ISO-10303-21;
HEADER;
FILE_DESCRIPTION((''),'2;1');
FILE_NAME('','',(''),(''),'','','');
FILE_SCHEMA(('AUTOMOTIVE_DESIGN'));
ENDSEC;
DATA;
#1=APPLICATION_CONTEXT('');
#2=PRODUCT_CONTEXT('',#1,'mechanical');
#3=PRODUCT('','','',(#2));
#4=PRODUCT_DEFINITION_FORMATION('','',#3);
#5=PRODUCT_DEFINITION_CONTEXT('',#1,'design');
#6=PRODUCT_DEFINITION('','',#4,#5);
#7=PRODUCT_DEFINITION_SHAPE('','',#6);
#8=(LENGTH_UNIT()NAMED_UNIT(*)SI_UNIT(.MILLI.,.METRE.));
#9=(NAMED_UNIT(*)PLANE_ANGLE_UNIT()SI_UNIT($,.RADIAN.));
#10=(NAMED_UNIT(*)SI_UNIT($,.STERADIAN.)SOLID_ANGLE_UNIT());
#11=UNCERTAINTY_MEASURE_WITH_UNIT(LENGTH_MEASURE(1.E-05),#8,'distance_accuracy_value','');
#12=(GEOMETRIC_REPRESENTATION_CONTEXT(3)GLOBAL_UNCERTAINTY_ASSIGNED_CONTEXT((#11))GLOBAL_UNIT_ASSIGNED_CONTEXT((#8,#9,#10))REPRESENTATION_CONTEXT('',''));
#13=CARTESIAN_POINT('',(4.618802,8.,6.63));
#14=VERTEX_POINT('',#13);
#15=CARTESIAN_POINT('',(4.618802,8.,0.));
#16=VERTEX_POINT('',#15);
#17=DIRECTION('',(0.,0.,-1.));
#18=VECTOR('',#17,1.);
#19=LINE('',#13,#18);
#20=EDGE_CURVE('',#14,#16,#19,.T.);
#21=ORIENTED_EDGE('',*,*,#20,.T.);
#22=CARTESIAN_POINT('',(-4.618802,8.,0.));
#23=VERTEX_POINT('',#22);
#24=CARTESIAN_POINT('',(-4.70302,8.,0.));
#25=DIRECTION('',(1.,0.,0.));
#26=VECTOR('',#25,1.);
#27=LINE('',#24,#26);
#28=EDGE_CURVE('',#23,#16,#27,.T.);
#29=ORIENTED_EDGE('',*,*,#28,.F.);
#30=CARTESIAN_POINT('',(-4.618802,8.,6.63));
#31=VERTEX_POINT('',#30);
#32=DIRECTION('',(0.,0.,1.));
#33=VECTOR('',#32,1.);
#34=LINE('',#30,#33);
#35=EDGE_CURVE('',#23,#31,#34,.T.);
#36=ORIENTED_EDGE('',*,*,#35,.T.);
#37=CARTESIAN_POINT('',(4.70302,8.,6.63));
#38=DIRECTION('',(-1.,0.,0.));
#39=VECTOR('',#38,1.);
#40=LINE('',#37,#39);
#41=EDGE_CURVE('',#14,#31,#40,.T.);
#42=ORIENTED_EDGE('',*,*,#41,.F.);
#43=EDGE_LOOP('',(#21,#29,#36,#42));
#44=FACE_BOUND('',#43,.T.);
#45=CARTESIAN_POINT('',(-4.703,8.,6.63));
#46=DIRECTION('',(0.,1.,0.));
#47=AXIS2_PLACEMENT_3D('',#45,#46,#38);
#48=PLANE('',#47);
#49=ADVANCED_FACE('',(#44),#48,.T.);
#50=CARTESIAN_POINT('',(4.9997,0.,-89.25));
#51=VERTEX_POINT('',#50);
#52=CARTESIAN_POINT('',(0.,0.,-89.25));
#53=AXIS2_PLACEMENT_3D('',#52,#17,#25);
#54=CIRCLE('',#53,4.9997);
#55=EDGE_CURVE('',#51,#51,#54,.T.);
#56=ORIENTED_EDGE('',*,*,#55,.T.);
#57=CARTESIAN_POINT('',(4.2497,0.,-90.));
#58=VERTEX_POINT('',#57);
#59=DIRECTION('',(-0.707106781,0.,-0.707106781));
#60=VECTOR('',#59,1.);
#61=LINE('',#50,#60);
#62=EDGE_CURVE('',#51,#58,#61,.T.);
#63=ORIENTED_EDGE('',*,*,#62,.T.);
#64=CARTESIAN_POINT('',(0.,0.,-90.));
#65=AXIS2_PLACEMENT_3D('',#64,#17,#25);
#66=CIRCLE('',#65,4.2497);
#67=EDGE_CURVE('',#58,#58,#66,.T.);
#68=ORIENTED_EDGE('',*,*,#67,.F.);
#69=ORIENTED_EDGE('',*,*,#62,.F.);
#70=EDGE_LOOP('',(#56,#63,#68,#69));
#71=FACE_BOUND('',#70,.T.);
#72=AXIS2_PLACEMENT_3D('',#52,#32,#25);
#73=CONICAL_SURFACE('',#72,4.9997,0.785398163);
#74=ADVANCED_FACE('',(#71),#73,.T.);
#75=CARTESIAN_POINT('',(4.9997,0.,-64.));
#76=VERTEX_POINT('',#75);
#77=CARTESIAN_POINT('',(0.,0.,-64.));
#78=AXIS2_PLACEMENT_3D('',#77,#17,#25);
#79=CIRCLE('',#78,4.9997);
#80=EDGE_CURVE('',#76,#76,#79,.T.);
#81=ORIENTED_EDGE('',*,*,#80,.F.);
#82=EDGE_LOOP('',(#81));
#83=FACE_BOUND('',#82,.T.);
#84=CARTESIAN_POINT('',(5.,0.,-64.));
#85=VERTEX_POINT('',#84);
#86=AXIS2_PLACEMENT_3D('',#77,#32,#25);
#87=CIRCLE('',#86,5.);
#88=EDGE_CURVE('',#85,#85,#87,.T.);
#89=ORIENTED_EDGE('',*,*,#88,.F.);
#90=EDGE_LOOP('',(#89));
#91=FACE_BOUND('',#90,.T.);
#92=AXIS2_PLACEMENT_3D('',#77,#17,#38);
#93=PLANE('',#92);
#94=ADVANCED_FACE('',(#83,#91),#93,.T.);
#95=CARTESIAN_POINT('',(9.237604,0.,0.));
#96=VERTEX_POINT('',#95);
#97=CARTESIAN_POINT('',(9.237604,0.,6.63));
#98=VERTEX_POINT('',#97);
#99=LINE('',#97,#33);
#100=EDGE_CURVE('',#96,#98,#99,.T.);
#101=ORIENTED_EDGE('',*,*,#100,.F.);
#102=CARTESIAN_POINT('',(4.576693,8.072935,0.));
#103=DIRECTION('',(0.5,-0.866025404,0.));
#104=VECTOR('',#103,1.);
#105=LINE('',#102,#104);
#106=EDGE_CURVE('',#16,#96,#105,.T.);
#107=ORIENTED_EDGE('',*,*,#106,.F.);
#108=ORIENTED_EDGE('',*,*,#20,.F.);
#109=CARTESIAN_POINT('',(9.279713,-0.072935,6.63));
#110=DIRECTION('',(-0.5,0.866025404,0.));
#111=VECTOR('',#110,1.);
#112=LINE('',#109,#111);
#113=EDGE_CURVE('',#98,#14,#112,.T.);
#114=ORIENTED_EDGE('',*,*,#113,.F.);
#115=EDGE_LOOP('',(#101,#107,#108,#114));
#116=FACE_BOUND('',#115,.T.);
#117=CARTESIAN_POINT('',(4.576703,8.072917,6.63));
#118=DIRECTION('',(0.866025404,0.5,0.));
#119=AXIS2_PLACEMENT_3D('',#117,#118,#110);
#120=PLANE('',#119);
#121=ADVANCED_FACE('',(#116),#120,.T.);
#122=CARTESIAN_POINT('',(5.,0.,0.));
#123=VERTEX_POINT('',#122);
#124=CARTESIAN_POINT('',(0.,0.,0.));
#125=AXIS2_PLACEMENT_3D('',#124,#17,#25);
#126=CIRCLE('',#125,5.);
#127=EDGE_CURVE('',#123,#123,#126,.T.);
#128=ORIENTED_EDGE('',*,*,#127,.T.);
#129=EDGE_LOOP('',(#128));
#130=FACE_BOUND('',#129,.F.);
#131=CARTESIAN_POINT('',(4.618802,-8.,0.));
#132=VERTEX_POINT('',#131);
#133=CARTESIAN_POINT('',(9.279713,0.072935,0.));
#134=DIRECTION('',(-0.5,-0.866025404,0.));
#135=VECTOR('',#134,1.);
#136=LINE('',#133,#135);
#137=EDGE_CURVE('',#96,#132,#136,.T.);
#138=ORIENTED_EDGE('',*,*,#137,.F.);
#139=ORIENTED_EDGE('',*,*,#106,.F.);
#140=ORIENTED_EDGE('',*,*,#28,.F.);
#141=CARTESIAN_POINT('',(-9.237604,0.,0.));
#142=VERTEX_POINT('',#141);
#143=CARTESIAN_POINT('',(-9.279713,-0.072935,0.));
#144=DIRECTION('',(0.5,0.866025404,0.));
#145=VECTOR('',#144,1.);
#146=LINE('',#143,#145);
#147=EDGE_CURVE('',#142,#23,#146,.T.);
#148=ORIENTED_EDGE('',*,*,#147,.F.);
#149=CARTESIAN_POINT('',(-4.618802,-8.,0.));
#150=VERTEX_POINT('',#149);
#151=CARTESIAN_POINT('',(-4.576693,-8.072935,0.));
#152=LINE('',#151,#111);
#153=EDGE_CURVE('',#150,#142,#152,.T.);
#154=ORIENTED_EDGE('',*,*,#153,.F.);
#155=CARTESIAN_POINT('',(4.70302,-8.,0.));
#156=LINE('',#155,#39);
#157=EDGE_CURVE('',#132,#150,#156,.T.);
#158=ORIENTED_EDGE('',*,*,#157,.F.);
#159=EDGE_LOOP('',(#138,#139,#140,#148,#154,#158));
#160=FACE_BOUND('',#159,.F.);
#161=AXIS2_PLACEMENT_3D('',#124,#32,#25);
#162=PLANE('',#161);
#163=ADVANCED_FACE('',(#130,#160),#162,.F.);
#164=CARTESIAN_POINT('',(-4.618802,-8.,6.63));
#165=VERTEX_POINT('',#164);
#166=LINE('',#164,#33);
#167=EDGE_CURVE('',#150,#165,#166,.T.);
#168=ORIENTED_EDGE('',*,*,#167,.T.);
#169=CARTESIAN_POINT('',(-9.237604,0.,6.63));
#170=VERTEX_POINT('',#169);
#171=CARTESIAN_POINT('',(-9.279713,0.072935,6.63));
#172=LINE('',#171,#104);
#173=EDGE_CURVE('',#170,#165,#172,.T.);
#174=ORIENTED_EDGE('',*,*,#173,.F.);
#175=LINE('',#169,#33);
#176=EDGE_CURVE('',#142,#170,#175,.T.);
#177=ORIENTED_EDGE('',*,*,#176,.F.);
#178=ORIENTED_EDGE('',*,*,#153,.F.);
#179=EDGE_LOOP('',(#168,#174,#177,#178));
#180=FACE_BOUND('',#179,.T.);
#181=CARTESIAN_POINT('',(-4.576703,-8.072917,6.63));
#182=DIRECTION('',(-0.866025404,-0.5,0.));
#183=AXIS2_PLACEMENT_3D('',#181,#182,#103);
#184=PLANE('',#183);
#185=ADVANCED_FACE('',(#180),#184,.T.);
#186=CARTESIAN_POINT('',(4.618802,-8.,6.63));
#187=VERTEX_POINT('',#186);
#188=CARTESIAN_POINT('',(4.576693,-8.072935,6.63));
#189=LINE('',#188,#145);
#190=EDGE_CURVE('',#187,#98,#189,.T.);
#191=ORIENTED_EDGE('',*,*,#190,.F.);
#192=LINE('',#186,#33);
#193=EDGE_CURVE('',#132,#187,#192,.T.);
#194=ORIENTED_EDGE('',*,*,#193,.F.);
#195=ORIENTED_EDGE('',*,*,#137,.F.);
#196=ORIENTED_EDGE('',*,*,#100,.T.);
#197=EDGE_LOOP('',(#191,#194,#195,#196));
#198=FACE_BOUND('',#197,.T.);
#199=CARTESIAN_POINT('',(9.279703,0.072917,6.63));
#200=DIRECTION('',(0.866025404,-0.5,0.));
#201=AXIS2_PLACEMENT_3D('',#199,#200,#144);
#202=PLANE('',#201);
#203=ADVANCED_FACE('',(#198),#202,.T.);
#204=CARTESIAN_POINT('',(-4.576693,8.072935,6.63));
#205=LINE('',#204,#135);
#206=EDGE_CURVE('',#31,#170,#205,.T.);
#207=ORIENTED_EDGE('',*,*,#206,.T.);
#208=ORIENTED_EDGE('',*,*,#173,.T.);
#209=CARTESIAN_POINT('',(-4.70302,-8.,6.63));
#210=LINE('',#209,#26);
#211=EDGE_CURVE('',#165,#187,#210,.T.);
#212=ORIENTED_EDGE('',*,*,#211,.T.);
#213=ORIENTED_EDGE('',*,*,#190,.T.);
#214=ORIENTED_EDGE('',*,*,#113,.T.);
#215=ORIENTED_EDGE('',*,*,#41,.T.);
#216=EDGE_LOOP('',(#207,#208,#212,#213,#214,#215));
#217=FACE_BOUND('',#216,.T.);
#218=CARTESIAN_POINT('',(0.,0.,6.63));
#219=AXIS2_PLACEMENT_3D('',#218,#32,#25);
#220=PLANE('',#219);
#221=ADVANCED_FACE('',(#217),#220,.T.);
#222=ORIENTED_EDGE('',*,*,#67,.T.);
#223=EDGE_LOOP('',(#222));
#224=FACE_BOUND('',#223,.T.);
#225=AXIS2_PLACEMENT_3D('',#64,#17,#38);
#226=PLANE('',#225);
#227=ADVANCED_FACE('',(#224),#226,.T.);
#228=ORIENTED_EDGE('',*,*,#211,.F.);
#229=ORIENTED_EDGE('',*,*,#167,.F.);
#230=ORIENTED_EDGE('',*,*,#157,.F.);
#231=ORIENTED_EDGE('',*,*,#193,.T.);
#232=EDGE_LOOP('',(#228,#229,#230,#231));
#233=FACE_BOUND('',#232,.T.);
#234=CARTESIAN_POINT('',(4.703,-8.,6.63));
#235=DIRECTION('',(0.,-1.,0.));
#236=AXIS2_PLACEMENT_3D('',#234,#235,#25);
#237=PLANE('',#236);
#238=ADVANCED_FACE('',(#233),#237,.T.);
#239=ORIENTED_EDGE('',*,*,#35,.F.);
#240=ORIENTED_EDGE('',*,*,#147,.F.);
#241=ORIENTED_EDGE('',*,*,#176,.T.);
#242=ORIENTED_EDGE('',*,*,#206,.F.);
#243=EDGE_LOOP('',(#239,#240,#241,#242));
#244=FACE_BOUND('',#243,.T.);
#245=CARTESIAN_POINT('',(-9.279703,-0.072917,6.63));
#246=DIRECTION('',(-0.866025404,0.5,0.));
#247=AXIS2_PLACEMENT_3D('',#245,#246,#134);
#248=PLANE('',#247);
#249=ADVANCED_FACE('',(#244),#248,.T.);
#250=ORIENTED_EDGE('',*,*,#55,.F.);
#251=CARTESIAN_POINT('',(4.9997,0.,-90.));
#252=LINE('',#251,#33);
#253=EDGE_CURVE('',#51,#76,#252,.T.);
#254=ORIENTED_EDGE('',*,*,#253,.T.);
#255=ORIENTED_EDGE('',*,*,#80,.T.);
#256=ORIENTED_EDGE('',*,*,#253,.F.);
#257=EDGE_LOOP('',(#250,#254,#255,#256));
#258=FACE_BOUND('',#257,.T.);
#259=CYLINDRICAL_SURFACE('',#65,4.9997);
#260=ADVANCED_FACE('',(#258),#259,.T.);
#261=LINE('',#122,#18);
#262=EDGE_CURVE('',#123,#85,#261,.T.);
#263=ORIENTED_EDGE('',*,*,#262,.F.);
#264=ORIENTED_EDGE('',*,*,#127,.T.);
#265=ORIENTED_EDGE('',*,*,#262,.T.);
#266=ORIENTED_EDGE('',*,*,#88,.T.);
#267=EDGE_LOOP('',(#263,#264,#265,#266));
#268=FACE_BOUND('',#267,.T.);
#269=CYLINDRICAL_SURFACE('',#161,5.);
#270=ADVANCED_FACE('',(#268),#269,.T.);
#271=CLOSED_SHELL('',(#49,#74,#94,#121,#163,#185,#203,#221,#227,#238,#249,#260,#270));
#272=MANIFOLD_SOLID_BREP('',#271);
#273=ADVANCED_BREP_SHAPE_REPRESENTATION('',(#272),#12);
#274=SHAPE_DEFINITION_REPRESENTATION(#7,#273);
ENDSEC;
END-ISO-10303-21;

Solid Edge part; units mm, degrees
sketch "Sketch1" plane through (0, 0, 0) normal (0, 0, 1) x (1, 0, 0)
  circle A0 centre (0, 0) radius 9.28
  dimension "D1" = 18.56
extrude "Protrusion1" add sketch "Sketch1" along normal blind 6.63
sketch "Sketch2" plane through (0, 0, 0) normal (0, 0, -1) x (1, 0, 0)
  circle A0 centre (0, 0) radius 5
extrude "Protrusion2" add sketch "Sketch2" along normal blind 90
sketch "Sketch3" plane through (0, 0, -90) normal (0, 0, -1) x (1, 0, 0)
  circle A0 centre (0, 0) radius 4.9997
extrude "Cutout1" cut sketch "Sketch3" against normal blind 26 flip side to cut
chamfer "Chamfer_1" distance 0.75 angle 45 1 edges at (-4.9997, 0, -90)
sketch "Sketch4" plane through (0, 0, 6.63) normal (0, 0, 1) x (1, 0, 0)
  line L0 (-4.703, 8) -> (4.703, 8)
  dimension "D1" = 16
extrude "Cutout2" cut sketch "Sketch4" against normal up to next material side at (0, 8.05, 6.63)
pattern_circular "Pattern1" count 6 over 360 about axis through (0, 0, 6.63) along (0, 0, 1) of "Cutout2"
properties part number "118419"
